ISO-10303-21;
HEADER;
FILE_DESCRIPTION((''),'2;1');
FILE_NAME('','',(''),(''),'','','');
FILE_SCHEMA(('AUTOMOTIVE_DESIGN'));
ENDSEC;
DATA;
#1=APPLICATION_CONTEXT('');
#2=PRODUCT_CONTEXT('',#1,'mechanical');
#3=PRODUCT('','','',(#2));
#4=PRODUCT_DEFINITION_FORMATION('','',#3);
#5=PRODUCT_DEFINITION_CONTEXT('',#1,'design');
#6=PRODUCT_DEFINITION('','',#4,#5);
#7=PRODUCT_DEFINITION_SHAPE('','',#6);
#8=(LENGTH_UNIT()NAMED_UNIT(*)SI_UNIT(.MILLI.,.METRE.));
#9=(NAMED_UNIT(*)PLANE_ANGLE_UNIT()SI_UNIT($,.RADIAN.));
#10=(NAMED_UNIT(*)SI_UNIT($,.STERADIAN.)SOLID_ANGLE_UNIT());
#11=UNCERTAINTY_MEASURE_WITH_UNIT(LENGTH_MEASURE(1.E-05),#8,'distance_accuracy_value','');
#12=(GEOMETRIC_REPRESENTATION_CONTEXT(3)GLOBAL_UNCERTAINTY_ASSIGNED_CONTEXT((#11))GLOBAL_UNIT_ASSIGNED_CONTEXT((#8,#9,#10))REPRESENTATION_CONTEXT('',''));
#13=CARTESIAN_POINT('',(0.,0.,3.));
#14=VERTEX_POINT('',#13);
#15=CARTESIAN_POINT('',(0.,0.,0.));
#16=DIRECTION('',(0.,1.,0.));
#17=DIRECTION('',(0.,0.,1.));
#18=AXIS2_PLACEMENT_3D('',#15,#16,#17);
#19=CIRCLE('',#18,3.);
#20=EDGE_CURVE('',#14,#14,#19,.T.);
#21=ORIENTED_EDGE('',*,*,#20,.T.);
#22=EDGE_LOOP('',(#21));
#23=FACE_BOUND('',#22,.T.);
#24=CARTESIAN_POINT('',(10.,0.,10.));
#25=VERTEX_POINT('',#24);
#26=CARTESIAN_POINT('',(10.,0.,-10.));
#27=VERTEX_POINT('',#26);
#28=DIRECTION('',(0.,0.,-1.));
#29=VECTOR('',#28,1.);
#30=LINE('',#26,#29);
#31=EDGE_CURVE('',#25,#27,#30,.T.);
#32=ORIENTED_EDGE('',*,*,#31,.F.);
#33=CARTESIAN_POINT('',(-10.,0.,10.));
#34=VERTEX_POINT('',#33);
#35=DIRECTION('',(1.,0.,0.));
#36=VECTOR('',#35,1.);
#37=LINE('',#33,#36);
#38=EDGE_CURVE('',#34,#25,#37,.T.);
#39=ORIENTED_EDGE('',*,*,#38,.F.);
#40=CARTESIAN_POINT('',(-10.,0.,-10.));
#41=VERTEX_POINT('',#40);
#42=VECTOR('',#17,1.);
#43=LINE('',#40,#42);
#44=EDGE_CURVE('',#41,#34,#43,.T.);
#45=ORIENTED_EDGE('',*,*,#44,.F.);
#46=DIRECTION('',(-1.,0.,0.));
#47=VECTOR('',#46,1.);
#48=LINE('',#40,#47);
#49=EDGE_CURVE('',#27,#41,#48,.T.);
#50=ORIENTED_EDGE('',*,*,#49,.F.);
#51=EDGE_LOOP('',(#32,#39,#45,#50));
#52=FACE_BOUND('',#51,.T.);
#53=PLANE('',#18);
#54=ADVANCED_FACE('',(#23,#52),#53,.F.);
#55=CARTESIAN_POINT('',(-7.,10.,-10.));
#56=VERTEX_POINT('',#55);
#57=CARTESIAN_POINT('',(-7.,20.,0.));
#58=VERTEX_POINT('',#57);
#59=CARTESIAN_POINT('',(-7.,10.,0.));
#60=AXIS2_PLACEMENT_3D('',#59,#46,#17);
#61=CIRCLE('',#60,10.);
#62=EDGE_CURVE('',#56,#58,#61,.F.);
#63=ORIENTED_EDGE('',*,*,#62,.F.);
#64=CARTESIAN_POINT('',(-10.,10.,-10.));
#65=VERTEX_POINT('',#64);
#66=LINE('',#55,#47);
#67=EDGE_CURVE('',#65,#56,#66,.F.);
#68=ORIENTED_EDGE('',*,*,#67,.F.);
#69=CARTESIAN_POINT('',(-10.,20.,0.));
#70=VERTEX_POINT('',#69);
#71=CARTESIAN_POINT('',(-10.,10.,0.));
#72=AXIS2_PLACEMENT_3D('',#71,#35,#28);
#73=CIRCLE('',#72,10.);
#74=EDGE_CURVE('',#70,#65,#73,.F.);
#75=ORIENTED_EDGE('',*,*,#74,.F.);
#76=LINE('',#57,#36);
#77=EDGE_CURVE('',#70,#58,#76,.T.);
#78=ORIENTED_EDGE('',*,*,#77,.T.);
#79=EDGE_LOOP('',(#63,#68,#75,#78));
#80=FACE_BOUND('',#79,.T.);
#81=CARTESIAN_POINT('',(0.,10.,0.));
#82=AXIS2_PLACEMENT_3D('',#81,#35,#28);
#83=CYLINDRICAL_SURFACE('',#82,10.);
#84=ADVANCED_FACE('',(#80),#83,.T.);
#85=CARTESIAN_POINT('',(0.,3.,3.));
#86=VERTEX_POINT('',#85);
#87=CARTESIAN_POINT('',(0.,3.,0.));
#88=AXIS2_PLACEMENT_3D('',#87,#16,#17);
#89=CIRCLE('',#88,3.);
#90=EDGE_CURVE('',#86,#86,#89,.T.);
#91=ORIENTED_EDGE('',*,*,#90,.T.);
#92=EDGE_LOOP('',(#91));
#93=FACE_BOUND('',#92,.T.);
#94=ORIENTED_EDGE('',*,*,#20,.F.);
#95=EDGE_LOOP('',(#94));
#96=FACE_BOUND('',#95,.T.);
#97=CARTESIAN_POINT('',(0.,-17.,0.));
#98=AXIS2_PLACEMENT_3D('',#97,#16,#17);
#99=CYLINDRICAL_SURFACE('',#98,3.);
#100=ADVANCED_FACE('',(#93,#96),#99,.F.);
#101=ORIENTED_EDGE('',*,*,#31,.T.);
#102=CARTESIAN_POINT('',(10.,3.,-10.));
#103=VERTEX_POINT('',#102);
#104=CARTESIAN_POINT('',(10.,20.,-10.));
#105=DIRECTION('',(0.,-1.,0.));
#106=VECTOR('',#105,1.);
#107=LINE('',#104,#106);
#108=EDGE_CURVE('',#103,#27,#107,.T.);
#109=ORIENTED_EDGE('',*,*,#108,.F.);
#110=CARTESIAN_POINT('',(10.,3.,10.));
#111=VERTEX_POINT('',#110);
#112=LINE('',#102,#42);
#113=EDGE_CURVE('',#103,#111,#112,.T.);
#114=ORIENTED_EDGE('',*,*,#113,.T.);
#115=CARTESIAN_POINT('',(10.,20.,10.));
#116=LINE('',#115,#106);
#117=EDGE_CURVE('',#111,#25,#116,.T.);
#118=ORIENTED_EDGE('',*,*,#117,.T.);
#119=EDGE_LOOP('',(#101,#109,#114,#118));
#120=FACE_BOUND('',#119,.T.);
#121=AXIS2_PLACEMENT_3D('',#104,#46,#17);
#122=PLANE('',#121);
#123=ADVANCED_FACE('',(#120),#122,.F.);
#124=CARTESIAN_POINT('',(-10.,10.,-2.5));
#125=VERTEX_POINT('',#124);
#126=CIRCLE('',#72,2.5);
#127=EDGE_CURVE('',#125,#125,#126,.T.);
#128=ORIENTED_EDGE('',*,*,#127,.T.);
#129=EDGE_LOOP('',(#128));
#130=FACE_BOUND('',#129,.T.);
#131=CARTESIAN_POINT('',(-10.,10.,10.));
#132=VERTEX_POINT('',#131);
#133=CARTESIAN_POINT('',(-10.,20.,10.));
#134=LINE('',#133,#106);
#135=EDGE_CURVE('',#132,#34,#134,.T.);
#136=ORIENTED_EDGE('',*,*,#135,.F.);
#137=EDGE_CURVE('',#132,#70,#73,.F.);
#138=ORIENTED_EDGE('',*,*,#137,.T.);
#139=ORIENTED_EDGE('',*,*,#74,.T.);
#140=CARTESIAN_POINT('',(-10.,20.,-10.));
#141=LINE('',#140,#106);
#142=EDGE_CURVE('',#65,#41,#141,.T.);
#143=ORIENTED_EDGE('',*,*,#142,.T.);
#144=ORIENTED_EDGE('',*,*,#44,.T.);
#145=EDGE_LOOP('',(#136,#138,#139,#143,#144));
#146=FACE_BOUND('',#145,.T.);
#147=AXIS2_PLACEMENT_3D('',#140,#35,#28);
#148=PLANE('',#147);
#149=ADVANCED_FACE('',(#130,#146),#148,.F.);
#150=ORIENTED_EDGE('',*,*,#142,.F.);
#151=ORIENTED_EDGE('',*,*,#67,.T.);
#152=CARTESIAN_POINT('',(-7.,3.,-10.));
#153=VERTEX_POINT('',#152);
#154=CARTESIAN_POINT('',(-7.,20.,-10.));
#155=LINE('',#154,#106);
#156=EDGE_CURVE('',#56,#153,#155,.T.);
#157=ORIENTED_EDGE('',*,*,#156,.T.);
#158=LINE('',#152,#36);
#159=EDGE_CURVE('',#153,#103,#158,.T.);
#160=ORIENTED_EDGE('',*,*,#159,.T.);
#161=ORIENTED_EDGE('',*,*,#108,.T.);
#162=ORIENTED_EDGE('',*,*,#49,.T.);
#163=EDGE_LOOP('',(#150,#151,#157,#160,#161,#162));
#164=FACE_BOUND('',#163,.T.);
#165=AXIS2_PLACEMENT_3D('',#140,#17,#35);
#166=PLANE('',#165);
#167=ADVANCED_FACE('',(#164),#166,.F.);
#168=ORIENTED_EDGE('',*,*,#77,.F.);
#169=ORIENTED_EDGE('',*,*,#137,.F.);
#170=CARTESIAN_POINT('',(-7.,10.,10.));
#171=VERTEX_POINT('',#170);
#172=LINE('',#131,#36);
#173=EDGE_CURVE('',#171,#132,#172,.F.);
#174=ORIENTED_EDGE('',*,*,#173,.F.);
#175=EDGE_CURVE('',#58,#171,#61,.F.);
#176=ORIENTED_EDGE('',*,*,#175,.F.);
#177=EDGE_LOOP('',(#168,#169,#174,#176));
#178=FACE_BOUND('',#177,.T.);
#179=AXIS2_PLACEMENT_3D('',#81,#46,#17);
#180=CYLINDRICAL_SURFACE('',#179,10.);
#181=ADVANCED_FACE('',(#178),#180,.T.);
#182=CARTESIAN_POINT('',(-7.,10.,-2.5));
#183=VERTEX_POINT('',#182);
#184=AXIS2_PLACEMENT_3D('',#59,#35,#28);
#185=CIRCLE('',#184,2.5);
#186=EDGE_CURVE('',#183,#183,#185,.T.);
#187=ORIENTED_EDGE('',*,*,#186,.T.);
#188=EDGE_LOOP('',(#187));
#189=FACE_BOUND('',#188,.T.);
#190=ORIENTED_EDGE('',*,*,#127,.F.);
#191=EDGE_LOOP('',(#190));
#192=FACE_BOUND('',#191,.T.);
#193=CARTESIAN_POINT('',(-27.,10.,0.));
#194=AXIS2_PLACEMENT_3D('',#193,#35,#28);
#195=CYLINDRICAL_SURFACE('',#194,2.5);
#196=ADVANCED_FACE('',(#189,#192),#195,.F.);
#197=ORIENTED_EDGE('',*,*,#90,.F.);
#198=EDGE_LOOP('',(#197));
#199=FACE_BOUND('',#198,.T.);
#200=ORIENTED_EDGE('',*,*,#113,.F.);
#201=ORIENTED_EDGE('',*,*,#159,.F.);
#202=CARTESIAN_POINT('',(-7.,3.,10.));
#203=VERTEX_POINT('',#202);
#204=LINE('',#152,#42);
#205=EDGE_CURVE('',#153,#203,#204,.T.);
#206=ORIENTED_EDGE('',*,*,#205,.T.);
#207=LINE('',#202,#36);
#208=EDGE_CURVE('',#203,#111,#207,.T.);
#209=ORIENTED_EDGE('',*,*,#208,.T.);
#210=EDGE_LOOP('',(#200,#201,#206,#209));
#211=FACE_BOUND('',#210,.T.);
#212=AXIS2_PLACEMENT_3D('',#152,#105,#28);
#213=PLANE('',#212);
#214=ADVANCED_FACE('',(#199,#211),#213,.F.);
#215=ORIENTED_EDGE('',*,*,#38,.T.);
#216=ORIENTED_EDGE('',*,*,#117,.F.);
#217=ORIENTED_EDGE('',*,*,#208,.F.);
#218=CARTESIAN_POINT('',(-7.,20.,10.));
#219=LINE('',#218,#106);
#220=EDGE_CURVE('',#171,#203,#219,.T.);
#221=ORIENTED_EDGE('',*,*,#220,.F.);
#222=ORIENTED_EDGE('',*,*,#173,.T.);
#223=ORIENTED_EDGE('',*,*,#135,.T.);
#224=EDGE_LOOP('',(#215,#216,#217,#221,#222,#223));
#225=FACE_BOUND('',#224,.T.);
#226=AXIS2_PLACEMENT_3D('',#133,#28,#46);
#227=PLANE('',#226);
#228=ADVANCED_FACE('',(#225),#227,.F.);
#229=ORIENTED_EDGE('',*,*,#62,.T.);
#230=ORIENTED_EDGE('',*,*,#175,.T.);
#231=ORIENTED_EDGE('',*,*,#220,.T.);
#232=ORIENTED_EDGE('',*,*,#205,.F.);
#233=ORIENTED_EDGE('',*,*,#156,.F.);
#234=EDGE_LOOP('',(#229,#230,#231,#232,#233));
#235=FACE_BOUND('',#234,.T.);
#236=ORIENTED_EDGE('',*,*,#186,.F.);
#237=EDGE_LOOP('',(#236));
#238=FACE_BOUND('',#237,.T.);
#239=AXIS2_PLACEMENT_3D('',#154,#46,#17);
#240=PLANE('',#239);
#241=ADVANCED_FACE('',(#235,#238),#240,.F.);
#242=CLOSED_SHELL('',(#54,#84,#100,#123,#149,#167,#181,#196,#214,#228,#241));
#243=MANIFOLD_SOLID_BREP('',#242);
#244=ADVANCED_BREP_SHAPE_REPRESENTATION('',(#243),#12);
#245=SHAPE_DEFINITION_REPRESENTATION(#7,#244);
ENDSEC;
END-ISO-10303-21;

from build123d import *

# Parameters (mm, degrees)
SKETCH_1_W          = 20
SKETCH_1_H          = 20
EXTRUDE_1_DEPTH     = 20
SKETCH_2_W          = 17
SKETCH_2_H          = 17
CUT_EXTRUDE_1_DEPTH = 20
FILLET_1_R          = 10
SKETCH_3_R          = 2.5
CUT_EXTRUDE_2_DEPTH = 20
SKETCH_4_R          = 3
CUT_EXTRUDE_3_DEPTH = 20


with BuildPart() as part:
    # 草图1 → 凸台-拉伸1 (new body)
    with BuildSketch(Plane(origin=(0, 0, 0), x_dir=(1, 0, 0), z_dir=(0, 1, 0))):
        Rectangle(SKETCH_1_W, SKETCH_1_H)
    extrude(amount=EXTRUDE_1_DEPTH)

    # 草图2 → 切除-拉伸1 (cut)
    with BuildSketch(Plane.XY.offset(10)):
        with Locations((1.5, 11.5)):
            Rectangle(SKETCH_2_W, SKETCH_2_H)
    extrude(amount=-CUT_EXTRUDE_1_DEPTH, mode=Mode.SUBTRACT)

    # 圆角1
    fillet_1_edges = [part.edges().sort_by_distance(p)[0] for p in [
        (-8.5, 20, -10),
        (-8.5, 20, 10),
    ]]
    fillet(fillet_1_edges, radius=FILLET_1_R - 0.0001)  # a hair under: the kernel refuses the full size

    # 草图3 → 切除-拉伸2 (cut)
    with BuildSketch(Plane(origin=(-7, 0, 0), x_dir=(0, 0, -1), z_dir=(1, 0, 0))):
        with Locations((0, 10)):
            Circle(SKETCH_3_R)
    extrude(amount=-CUT_EXTRUDE_2_DEPTH, mode=Mode.SUBTRACT)

    # 草图4 → 切除-拉伸3 (cut)
    with BuildSketch(Plane(origin=(0, 3, 0), x_dir=(1, 0, 0), z_dir=(0, 1, 0))):
        with Locations(Location((0, 0, 0), (0, 0, 270))):
            Circle(SKETCH_4_R)
    extrude(amount=-CUT_EXTRUDE_3_DEPTH, mode=Mode.SUBTRACT)


solid = part.part
